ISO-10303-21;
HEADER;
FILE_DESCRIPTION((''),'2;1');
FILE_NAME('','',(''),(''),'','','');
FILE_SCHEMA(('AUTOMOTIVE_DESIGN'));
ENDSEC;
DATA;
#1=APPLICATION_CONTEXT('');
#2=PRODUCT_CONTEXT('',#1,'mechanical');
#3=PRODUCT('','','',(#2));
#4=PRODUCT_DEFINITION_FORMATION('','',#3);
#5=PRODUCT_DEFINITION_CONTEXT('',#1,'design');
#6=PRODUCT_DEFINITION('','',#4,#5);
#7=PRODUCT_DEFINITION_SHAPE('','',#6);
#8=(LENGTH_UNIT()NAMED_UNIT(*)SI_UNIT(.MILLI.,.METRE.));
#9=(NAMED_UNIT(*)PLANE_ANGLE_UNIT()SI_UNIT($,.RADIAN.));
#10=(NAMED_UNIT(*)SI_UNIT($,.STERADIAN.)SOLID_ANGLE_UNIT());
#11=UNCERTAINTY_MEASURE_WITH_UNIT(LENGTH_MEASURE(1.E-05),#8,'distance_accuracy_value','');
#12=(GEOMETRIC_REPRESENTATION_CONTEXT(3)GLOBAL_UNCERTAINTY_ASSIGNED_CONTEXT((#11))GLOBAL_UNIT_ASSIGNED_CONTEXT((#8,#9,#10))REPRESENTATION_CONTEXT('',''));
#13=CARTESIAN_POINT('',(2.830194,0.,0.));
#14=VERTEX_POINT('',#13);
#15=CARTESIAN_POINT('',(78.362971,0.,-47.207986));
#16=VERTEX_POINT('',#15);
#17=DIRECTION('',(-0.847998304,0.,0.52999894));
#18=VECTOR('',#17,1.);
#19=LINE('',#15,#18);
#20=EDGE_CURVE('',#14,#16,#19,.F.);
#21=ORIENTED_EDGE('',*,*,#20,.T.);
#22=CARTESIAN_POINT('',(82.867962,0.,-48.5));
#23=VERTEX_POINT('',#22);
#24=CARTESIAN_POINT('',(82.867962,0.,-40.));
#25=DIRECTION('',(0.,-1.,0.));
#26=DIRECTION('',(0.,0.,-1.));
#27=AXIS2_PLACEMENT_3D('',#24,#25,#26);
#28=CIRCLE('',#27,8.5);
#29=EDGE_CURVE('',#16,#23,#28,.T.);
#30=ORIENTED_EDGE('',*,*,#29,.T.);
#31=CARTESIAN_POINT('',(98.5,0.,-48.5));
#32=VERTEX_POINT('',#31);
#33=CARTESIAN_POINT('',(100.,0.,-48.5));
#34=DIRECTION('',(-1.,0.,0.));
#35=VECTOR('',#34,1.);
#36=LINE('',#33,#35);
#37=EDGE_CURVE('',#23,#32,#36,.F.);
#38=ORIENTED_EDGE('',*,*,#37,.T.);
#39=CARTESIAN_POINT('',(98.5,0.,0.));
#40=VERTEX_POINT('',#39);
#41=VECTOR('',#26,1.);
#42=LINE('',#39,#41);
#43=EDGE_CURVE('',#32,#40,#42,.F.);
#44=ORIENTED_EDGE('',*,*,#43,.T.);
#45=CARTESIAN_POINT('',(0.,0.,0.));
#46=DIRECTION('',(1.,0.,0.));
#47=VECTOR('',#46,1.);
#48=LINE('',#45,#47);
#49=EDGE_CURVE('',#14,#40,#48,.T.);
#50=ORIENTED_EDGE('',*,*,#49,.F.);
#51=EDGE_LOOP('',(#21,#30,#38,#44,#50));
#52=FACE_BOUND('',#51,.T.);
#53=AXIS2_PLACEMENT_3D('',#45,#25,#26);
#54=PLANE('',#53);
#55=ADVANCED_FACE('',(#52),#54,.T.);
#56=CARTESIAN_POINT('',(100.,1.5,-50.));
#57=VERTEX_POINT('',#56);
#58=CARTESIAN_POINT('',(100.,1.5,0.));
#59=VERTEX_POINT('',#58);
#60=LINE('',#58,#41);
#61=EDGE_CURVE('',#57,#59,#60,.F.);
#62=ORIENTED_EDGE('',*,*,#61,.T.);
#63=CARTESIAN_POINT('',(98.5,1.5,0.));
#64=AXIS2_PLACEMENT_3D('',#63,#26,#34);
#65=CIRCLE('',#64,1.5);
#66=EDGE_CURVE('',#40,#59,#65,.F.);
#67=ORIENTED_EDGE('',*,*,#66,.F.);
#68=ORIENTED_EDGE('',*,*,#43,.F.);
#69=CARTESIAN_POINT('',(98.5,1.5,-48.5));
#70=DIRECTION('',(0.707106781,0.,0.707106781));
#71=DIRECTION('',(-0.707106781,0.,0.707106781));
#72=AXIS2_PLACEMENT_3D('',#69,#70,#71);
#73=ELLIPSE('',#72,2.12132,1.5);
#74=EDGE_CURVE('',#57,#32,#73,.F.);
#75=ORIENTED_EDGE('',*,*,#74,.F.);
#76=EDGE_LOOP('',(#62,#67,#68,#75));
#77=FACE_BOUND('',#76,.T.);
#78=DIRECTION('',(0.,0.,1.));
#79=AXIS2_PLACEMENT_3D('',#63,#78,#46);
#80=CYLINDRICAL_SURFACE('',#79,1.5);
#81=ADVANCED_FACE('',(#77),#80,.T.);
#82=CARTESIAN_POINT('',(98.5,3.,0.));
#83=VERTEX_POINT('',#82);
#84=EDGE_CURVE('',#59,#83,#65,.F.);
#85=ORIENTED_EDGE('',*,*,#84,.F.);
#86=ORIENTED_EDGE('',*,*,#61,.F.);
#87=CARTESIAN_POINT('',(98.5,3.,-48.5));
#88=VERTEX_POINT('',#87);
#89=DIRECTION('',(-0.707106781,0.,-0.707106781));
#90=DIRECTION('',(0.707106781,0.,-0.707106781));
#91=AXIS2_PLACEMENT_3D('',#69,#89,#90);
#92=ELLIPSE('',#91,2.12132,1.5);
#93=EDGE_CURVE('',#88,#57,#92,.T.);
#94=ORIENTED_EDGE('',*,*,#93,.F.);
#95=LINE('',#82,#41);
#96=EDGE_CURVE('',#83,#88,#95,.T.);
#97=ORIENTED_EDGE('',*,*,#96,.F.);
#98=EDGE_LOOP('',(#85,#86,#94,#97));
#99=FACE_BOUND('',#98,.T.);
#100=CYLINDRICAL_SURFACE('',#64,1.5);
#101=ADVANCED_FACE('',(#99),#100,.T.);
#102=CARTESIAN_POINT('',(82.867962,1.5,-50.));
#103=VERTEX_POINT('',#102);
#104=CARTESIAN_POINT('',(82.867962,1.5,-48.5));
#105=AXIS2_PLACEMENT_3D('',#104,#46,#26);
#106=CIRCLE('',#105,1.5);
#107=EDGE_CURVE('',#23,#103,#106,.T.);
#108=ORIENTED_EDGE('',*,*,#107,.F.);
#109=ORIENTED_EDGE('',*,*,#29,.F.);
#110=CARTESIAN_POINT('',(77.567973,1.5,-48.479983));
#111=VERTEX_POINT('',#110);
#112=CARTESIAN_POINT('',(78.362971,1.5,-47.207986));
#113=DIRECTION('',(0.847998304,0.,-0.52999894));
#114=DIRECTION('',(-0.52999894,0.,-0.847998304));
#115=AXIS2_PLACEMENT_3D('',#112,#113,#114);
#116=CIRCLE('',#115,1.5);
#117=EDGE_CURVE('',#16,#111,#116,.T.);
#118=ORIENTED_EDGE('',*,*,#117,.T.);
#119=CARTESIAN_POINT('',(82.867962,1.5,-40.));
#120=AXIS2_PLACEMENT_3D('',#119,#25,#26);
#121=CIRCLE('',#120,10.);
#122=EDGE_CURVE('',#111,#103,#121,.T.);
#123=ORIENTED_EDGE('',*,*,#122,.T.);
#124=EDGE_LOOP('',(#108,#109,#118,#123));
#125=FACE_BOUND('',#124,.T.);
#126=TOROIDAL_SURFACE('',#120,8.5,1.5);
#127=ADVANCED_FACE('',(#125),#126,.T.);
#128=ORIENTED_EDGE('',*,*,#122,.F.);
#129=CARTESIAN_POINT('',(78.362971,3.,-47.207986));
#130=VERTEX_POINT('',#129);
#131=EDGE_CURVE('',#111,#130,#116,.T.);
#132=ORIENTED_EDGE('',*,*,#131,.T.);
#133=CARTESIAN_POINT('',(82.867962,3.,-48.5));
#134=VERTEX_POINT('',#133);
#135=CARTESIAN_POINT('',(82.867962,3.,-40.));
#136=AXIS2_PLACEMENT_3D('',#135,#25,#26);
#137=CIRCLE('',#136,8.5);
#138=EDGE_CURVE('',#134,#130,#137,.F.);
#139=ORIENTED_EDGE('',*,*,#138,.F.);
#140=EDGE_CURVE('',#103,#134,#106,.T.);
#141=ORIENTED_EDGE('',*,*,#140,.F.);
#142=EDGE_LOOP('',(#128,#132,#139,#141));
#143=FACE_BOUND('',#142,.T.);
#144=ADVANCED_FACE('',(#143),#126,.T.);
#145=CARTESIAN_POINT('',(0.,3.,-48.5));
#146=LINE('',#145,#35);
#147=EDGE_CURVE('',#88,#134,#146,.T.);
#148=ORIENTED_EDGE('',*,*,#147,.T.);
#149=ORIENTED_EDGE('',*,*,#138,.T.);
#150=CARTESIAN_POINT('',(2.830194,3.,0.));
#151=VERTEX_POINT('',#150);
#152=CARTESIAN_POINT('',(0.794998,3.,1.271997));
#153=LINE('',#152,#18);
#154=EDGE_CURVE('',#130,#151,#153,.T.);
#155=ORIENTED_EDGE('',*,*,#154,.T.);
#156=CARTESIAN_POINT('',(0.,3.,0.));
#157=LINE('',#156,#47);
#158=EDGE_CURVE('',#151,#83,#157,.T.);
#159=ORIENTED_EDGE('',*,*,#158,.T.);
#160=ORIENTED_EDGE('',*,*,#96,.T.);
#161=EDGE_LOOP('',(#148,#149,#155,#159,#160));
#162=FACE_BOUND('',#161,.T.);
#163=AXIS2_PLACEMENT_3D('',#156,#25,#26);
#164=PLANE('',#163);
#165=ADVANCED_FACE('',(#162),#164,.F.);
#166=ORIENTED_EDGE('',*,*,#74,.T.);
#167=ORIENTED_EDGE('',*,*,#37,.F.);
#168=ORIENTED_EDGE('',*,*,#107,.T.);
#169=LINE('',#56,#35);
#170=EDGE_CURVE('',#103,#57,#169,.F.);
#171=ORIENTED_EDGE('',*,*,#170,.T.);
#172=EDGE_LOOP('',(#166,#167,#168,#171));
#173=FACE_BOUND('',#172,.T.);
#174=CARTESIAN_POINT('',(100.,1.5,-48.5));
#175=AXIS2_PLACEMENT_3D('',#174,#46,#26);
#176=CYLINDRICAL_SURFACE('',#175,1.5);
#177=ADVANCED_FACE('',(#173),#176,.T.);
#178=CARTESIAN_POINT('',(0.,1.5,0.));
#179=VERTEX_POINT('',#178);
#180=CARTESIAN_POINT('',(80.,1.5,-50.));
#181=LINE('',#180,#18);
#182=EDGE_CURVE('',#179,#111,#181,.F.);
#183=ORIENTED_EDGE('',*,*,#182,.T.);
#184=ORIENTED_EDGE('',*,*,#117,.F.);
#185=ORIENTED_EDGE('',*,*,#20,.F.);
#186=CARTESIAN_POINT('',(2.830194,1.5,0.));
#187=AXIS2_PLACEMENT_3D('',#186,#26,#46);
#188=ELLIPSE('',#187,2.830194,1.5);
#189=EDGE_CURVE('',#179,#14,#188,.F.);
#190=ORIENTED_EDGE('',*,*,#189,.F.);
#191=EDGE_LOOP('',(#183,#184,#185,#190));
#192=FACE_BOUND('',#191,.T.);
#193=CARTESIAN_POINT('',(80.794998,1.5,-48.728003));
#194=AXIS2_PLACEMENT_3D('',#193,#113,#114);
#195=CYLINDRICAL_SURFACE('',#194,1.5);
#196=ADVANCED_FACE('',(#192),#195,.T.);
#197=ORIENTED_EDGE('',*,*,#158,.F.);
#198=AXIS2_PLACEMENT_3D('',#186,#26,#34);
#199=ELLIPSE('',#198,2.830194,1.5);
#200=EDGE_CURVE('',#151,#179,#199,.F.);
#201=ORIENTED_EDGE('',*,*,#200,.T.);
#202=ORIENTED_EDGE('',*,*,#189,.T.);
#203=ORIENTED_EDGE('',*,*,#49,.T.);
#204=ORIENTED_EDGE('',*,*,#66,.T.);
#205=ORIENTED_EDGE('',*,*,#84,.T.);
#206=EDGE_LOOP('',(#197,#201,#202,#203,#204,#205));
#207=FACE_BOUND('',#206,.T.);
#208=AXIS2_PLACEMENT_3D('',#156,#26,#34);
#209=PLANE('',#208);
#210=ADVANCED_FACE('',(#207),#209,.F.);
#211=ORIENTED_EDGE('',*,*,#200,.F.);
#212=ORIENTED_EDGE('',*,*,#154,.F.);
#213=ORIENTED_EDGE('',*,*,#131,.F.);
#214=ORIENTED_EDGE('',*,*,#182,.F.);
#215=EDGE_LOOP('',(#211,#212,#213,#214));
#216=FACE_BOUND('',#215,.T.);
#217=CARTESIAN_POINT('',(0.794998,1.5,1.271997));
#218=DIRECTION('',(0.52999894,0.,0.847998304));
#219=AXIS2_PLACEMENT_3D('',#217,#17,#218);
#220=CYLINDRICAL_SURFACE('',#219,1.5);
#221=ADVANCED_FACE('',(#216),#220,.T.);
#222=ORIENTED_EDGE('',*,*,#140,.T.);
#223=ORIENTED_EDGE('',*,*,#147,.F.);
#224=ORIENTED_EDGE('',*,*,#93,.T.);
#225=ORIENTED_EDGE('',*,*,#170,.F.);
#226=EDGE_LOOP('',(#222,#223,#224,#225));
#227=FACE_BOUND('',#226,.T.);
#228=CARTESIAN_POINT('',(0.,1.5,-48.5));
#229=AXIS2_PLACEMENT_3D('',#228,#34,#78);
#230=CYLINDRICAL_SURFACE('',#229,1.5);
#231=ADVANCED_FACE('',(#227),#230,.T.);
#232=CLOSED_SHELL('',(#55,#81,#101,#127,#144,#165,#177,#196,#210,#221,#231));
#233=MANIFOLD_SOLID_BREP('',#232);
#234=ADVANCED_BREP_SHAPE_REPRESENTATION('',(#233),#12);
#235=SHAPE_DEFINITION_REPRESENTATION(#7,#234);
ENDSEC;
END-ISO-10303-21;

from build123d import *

# Parameters (mm, degrees)
BOSS_EXTRUDE1_DEPTH = 3
FILLET1_R           = 10
FILLET2_R           = 1.5


with BuildPart() as part:
    # Sketch1 → Boss-Extrude1 (new body)
    with BuildSketch(Plane(origin=(0, 0, 0), x_dir=(1, 0, 0), z_dir=(0, 1, 0))):
        Polygon((0, 0), (100, 0), (100, 50), (80, 50), align=None)
    extrude(amount=BOSS_EXTRUDE1_DEPTH)

    # Fillet1
    fillet1_edges = [part.edges().sort_by_distance(p)[0] for p in [
        (80, 1.5, -50),
    ]]
    fillet(fillet1_edges, radius=FILLET1_R)

    # Fillet2
    fillet2_edges = [part.edges().sort_by_distance(p)[0] for p in [
        (91.433981132, 0, -50),
        (80.111137134, 0, -49.612487462),
        (91.433981132, 3, -50),
        (80.111137134, 3, -49.612487462),
        (100, 3, -25),
        (100, 0, -25),
        (38.783986432, 0, -24.23999152),
        (38.783986432, 3, -24.23999152),
    ]]
    fillet(fillet2_edges, radius=FILLET2_R - 0.0001)  # a hair under: the kernel refuses the full size


solid = part.part
